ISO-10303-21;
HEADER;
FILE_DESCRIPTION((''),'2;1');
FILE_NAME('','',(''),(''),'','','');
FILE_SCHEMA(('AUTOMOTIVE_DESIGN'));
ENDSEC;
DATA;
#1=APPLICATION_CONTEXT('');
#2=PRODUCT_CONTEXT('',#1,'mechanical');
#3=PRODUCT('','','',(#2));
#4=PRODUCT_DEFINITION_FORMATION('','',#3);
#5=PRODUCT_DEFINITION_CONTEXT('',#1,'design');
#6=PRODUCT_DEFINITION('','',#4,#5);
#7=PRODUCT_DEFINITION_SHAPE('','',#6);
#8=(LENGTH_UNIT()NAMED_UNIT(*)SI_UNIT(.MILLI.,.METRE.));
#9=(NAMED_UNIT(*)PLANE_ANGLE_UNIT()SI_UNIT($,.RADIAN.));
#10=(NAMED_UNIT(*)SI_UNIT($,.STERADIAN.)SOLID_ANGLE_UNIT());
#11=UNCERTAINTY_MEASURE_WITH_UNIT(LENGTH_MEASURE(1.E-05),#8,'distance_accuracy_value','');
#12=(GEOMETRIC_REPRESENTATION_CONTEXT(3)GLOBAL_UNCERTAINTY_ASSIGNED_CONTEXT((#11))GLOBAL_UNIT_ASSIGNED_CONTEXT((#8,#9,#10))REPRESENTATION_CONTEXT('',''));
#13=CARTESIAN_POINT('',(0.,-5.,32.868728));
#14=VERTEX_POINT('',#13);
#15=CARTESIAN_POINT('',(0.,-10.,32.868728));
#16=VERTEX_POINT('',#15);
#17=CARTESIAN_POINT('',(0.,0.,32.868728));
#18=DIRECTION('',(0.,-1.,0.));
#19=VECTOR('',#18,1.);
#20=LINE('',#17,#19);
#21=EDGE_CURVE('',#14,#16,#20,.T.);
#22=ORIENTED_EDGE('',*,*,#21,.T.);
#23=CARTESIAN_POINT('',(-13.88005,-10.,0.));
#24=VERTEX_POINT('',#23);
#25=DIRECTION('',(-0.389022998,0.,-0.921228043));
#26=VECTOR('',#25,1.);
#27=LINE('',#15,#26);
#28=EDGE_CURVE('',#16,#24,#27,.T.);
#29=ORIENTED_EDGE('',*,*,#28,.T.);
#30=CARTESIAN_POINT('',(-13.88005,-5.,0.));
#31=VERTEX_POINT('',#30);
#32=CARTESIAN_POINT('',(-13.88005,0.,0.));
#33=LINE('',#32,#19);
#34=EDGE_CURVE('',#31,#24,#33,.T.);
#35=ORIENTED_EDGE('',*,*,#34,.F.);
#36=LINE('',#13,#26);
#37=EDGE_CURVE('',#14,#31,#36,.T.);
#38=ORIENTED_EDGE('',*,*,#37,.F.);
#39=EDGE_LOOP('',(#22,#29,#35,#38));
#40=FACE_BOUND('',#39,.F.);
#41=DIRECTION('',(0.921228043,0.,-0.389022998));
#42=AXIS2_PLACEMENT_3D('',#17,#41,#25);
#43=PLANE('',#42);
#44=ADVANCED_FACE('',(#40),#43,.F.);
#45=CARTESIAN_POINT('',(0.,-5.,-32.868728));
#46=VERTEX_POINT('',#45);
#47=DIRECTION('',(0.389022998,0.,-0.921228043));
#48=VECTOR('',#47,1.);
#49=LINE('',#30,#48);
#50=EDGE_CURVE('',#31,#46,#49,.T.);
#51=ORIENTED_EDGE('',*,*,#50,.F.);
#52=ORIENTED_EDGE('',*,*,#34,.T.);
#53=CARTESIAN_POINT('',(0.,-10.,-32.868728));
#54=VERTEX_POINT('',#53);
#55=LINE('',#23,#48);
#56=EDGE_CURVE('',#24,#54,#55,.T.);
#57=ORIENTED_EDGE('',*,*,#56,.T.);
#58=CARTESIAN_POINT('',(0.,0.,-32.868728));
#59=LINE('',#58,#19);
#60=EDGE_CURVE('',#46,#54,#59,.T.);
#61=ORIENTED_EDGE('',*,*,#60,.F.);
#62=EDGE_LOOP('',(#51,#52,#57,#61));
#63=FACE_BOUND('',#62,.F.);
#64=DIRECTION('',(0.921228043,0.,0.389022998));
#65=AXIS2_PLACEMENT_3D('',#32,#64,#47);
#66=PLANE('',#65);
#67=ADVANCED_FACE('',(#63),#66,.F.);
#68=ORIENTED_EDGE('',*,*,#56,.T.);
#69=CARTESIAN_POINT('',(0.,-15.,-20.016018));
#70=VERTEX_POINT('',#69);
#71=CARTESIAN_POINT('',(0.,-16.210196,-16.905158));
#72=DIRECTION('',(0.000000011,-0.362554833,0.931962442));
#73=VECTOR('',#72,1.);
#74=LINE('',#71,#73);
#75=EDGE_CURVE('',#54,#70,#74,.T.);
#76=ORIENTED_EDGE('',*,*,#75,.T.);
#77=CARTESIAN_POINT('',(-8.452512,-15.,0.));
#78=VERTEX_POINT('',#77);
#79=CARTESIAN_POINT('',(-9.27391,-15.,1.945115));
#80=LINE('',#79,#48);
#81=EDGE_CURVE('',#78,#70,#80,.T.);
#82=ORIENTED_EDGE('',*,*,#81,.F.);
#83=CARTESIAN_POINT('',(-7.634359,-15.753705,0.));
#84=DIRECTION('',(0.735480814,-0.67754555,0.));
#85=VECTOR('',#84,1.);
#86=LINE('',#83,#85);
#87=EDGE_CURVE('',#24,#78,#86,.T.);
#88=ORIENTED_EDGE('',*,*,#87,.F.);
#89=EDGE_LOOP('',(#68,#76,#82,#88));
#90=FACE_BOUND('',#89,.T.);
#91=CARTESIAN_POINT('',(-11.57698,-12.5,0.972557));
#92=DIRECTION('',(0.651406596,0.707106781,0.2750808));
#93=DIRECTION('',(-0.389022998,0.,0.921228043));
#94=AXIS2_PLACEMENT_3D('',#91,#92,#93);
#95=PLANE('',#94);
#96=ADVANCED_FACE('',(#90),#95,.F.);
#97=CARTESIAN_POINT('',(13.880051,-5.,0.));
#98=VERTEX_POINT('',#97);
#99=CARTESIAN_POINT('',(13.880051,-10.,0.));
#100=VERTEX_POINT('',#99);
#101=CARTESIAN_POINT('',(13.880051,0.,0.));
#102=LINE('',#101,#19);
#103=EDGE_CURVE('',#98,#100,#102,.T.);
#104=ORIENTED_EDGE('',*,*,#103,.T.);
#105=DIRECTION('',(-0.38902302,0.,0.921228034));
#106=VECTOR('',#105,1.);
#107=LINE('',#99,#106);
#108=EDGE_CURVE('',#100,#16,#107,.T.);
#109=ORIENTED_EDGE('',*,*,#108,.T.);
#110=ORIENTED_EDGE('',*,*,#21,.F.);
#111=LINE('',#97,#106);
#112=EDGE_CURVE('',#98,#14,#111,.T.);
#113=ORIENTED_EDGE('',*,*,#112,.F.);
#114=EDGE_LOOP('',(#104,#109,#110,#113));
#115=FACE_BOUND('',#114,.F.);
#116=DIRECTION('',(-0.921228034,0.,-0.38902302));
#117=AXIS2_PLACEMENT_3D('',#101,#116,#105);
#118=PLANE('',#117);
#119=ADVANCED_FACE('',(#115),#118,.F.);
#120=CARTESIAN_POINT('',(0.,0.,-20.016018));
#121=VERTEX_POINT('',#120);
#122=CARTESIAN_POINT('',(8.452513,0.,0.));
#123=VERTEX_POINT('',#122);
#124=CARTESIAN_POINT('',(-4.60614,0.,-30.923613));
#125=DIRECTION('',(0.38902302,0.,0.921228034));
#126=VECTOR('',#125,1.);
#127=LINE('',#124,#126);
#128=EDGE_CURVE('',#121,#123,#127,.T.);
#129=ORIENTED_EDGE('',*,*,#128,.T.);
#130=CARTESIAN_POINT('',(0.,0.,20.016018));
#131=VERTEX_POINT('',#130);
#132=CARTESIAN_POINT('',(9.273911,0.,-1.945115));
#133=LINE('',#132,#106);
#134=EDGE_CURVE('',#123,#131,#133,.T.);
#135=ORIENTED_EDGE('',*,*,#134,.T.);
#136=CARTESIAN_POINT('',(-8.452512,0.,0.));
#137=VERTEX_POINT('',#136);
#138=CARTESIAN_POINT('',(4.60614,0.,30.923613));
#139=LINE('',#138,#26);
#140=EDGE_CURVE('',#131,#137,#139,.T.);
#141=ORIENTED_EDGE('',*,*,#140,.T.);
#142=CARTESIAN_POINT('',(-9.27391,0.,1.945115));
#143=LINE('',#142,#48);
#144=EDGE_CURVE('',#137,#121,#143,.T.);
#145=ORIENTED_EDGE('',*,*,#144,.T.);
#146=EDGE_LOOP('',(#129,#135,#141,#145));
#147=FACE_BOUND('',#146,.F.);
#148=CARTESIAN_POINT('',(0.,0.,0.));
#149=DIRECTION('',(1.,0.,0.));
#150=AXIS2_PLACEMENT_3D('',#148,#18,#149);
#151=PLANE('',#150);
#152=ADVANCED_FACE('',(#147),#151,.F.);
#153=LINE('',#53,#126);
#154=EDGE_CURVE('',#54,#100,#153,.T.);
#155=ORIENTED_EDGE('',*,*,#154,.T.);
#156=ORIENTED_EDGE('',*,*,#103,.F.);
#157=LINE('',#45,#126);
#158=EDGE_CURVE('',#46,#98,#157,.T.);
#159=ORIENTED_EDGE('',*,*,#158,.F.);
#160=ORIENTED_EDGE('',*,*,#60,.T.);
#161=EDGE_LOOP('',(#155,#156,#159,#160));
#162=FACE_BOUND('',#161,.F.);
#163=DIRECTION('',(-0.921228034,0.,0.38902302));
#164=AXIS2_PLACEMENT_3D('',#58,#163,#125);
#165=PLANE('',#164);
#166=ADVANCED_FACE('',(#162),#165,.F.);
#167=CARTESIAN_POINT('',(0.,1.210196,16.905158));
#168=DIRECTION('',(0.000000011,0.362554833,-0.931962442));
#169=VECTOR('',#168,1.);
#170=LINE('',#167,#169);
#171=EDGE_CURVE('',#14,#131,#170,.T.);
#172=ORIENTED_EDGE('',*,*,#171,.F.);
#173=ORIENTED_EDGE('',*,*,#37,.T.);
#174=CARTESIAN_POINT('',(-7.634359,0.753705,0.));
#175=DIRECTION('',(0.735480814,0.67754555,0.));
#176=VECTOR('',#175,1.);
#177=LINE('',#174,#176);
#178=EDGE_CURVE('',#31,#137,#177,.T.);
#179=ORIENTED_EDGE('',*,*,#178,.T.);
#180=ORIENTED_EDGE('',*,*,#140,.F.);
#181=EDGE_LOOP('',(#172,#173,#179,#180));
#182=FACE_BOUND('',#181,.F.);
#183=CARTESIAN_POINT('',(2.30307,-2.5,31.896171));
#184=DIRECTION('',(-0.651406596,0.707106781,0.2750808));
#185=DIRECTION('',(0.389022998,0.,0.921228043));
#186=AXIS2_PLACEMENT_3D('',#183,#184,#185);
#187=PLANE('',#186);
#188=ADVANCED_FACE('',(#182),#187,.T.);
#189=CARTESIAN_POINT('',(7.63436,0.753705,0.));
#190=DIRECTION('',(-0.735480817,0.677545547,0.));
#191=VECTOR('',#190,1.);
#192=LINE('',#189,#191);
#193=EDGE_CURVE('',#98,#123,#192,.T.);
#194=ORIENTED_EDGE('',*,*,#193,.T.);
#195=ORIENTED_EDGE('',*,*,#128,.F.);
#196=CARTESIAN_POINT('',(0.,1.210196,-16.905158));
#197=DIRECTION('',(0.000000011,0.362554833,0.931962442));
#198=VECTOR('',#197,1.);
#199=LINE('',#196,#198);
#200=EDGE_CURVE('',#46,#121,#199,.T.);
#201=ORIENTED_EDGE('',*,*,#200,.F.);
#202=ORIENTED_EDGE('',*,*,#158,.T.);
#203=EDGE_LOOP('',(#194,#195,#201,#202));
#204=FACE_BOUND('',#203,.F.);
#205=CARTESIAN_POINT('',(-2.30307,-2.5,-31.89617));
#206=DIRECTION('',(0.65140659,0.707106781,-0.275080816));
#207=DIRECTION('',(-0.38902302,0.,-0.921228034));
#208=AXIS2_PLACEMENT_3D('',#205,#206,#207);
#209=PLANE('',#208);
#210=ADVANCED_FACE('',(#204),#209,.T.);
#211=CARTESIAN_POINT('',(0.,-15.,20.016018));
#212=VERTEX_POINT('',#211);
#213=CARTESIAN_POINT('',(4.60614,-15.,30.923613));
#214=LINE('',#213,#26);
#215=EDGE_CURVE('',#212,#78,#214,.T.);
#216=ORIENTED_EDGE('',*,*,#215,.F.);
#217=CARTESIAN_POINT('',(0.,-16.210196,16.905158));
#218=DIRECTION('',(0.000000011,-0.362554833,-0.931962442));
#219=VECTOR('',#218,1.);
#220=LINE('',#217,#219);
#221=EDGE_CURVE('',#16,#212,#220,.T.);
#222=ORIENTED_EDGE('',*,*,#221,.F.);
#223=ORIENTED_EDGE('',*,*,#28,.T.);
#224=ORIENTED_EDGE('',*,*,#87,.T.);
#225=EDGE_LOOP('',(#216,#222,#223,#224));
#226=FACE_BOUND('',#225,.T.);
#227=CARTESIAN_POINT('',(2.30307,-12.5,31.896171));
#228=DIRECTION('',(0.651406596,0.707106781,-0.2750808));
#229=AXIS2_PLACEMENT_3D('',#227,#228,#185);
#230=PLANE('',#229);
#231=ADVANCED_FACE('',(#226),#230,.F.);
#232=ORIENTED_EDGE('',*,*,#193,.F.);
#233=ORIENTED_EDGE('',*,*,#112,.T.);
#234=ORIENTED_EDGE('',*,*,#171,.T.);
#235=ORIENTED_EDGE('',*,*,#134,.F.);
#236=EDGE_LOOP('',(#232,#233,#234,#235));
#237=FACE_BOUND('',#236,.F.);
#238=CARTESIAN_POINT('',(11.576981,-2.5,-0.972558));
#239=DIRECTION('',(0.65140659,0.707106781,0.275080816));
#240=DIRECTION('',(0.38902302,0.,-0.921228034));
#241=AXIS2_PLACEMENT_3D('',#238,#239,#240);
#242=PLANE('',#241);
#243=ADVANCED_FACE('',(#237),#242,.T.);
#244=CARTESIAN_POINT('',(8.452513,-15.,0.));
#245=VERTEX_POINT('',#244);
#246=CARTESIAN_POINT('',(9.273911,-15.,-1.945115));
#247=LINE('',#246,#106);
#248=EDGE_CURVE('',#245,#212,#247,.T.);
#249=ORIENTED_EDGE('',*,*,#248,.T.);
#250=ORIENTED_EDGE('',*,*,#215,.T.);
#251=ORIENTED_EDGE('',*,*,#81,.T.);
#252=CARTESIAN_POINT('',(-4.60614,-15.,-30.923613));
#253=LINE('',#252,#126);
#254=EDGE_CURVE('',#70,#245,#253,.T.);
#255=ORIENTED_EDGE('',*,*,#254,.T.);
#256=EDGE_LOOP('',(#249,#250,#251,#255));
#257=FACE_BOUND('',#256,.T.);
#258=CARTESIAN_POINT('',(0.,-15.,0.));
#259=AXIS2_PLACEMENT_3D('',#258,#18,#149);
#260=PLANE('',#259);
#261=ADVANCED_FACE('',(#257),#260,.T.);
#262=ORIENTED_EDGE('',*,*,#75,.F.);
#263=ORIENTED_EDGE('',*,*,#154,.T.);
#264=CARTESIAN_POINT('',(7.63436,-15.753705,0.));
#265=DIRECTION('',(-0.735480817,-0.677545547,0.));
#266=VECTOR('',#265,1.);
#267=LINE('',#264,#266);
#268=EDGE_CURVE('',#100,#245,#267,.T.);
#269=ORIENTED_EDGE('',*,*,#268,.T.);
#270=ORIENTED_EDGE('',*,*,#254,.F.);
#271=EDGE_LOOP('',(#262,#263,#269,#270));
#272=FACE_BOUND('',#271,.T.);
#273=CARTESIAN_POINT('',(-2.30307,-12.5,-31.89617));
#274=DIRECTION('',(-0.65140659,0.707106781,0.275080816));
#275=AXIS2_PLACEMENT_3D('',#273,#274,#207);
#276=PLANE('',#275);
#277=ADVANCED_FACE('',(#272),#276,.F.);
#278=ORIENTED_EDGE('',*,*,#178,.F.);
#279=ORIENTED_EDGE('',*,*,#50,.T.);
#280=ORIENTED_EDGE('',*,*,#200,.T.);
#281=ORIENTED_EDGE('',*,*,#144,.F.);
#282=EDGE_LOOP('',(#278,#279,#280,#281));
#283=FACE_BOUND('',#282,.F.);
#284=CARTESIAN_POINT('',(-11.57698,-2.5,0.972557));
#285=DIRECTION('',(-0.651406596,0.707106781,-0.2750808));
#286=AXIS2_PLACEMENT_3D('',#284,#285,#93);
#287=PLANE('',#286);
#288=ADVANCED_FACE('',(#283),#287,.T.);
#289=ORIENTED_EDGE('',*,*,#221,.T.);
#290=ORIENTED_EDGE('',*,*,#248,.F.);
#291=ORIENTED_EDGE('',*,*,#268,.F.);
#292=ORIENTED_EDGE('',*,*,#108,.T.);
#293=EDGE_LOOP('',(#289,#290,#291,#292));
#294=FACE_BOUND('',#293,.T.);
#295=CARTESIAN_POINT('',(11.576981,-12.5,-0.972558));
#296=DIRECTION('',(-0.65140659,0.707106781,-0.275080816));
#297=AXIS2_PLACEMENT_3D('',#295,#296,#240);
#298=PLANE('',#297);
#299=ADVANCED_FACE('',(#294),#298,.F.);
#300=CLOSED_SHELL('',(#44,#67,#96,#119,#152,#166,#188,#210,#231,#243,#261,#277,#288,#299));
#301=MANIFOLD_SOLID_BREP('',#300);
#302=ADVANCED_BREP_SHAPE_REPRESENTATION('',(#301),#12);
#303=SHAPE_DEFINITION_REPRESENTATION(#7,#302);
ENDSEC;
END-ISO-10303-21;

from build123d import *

# Parameters (mm, degrees)
F1_DEPTH = 15
F2_SIZE  = 5


# Not quite as in the source:
# - two fillets or chamfers of one size are made in one step


with BuildPart() as f1:
    # F0 (on Front) → F1 (new body)
    with BuildSketch(Plane.XZ):
        Polygon((13.8800507411, 0), (0, 32.8687280416), (-13.8800498098, 0), (0, -32.8687280416), align=None)
    extrude(amount=F1_DEPTH)

    # F2
    f2_edges = [f1.edges().sort_by_distance(p)[0] for p in [
        (6.940025, -15, 16.434364),
        (-6.940025, -15, 16.434364),
        (-6.940025, -15, -16.434364),
        (6.940025, -15, -16.434364),
        (6.940025, 0, 16.434364),
        (-6.940025, 0, 16.434364),
        (-6.940025, 0, -16.434364),
        (6.940025, 0, -16.434364),
    ]]
    chamfer(f2_edges, length=F2_SIZE)


solid = f1.part
